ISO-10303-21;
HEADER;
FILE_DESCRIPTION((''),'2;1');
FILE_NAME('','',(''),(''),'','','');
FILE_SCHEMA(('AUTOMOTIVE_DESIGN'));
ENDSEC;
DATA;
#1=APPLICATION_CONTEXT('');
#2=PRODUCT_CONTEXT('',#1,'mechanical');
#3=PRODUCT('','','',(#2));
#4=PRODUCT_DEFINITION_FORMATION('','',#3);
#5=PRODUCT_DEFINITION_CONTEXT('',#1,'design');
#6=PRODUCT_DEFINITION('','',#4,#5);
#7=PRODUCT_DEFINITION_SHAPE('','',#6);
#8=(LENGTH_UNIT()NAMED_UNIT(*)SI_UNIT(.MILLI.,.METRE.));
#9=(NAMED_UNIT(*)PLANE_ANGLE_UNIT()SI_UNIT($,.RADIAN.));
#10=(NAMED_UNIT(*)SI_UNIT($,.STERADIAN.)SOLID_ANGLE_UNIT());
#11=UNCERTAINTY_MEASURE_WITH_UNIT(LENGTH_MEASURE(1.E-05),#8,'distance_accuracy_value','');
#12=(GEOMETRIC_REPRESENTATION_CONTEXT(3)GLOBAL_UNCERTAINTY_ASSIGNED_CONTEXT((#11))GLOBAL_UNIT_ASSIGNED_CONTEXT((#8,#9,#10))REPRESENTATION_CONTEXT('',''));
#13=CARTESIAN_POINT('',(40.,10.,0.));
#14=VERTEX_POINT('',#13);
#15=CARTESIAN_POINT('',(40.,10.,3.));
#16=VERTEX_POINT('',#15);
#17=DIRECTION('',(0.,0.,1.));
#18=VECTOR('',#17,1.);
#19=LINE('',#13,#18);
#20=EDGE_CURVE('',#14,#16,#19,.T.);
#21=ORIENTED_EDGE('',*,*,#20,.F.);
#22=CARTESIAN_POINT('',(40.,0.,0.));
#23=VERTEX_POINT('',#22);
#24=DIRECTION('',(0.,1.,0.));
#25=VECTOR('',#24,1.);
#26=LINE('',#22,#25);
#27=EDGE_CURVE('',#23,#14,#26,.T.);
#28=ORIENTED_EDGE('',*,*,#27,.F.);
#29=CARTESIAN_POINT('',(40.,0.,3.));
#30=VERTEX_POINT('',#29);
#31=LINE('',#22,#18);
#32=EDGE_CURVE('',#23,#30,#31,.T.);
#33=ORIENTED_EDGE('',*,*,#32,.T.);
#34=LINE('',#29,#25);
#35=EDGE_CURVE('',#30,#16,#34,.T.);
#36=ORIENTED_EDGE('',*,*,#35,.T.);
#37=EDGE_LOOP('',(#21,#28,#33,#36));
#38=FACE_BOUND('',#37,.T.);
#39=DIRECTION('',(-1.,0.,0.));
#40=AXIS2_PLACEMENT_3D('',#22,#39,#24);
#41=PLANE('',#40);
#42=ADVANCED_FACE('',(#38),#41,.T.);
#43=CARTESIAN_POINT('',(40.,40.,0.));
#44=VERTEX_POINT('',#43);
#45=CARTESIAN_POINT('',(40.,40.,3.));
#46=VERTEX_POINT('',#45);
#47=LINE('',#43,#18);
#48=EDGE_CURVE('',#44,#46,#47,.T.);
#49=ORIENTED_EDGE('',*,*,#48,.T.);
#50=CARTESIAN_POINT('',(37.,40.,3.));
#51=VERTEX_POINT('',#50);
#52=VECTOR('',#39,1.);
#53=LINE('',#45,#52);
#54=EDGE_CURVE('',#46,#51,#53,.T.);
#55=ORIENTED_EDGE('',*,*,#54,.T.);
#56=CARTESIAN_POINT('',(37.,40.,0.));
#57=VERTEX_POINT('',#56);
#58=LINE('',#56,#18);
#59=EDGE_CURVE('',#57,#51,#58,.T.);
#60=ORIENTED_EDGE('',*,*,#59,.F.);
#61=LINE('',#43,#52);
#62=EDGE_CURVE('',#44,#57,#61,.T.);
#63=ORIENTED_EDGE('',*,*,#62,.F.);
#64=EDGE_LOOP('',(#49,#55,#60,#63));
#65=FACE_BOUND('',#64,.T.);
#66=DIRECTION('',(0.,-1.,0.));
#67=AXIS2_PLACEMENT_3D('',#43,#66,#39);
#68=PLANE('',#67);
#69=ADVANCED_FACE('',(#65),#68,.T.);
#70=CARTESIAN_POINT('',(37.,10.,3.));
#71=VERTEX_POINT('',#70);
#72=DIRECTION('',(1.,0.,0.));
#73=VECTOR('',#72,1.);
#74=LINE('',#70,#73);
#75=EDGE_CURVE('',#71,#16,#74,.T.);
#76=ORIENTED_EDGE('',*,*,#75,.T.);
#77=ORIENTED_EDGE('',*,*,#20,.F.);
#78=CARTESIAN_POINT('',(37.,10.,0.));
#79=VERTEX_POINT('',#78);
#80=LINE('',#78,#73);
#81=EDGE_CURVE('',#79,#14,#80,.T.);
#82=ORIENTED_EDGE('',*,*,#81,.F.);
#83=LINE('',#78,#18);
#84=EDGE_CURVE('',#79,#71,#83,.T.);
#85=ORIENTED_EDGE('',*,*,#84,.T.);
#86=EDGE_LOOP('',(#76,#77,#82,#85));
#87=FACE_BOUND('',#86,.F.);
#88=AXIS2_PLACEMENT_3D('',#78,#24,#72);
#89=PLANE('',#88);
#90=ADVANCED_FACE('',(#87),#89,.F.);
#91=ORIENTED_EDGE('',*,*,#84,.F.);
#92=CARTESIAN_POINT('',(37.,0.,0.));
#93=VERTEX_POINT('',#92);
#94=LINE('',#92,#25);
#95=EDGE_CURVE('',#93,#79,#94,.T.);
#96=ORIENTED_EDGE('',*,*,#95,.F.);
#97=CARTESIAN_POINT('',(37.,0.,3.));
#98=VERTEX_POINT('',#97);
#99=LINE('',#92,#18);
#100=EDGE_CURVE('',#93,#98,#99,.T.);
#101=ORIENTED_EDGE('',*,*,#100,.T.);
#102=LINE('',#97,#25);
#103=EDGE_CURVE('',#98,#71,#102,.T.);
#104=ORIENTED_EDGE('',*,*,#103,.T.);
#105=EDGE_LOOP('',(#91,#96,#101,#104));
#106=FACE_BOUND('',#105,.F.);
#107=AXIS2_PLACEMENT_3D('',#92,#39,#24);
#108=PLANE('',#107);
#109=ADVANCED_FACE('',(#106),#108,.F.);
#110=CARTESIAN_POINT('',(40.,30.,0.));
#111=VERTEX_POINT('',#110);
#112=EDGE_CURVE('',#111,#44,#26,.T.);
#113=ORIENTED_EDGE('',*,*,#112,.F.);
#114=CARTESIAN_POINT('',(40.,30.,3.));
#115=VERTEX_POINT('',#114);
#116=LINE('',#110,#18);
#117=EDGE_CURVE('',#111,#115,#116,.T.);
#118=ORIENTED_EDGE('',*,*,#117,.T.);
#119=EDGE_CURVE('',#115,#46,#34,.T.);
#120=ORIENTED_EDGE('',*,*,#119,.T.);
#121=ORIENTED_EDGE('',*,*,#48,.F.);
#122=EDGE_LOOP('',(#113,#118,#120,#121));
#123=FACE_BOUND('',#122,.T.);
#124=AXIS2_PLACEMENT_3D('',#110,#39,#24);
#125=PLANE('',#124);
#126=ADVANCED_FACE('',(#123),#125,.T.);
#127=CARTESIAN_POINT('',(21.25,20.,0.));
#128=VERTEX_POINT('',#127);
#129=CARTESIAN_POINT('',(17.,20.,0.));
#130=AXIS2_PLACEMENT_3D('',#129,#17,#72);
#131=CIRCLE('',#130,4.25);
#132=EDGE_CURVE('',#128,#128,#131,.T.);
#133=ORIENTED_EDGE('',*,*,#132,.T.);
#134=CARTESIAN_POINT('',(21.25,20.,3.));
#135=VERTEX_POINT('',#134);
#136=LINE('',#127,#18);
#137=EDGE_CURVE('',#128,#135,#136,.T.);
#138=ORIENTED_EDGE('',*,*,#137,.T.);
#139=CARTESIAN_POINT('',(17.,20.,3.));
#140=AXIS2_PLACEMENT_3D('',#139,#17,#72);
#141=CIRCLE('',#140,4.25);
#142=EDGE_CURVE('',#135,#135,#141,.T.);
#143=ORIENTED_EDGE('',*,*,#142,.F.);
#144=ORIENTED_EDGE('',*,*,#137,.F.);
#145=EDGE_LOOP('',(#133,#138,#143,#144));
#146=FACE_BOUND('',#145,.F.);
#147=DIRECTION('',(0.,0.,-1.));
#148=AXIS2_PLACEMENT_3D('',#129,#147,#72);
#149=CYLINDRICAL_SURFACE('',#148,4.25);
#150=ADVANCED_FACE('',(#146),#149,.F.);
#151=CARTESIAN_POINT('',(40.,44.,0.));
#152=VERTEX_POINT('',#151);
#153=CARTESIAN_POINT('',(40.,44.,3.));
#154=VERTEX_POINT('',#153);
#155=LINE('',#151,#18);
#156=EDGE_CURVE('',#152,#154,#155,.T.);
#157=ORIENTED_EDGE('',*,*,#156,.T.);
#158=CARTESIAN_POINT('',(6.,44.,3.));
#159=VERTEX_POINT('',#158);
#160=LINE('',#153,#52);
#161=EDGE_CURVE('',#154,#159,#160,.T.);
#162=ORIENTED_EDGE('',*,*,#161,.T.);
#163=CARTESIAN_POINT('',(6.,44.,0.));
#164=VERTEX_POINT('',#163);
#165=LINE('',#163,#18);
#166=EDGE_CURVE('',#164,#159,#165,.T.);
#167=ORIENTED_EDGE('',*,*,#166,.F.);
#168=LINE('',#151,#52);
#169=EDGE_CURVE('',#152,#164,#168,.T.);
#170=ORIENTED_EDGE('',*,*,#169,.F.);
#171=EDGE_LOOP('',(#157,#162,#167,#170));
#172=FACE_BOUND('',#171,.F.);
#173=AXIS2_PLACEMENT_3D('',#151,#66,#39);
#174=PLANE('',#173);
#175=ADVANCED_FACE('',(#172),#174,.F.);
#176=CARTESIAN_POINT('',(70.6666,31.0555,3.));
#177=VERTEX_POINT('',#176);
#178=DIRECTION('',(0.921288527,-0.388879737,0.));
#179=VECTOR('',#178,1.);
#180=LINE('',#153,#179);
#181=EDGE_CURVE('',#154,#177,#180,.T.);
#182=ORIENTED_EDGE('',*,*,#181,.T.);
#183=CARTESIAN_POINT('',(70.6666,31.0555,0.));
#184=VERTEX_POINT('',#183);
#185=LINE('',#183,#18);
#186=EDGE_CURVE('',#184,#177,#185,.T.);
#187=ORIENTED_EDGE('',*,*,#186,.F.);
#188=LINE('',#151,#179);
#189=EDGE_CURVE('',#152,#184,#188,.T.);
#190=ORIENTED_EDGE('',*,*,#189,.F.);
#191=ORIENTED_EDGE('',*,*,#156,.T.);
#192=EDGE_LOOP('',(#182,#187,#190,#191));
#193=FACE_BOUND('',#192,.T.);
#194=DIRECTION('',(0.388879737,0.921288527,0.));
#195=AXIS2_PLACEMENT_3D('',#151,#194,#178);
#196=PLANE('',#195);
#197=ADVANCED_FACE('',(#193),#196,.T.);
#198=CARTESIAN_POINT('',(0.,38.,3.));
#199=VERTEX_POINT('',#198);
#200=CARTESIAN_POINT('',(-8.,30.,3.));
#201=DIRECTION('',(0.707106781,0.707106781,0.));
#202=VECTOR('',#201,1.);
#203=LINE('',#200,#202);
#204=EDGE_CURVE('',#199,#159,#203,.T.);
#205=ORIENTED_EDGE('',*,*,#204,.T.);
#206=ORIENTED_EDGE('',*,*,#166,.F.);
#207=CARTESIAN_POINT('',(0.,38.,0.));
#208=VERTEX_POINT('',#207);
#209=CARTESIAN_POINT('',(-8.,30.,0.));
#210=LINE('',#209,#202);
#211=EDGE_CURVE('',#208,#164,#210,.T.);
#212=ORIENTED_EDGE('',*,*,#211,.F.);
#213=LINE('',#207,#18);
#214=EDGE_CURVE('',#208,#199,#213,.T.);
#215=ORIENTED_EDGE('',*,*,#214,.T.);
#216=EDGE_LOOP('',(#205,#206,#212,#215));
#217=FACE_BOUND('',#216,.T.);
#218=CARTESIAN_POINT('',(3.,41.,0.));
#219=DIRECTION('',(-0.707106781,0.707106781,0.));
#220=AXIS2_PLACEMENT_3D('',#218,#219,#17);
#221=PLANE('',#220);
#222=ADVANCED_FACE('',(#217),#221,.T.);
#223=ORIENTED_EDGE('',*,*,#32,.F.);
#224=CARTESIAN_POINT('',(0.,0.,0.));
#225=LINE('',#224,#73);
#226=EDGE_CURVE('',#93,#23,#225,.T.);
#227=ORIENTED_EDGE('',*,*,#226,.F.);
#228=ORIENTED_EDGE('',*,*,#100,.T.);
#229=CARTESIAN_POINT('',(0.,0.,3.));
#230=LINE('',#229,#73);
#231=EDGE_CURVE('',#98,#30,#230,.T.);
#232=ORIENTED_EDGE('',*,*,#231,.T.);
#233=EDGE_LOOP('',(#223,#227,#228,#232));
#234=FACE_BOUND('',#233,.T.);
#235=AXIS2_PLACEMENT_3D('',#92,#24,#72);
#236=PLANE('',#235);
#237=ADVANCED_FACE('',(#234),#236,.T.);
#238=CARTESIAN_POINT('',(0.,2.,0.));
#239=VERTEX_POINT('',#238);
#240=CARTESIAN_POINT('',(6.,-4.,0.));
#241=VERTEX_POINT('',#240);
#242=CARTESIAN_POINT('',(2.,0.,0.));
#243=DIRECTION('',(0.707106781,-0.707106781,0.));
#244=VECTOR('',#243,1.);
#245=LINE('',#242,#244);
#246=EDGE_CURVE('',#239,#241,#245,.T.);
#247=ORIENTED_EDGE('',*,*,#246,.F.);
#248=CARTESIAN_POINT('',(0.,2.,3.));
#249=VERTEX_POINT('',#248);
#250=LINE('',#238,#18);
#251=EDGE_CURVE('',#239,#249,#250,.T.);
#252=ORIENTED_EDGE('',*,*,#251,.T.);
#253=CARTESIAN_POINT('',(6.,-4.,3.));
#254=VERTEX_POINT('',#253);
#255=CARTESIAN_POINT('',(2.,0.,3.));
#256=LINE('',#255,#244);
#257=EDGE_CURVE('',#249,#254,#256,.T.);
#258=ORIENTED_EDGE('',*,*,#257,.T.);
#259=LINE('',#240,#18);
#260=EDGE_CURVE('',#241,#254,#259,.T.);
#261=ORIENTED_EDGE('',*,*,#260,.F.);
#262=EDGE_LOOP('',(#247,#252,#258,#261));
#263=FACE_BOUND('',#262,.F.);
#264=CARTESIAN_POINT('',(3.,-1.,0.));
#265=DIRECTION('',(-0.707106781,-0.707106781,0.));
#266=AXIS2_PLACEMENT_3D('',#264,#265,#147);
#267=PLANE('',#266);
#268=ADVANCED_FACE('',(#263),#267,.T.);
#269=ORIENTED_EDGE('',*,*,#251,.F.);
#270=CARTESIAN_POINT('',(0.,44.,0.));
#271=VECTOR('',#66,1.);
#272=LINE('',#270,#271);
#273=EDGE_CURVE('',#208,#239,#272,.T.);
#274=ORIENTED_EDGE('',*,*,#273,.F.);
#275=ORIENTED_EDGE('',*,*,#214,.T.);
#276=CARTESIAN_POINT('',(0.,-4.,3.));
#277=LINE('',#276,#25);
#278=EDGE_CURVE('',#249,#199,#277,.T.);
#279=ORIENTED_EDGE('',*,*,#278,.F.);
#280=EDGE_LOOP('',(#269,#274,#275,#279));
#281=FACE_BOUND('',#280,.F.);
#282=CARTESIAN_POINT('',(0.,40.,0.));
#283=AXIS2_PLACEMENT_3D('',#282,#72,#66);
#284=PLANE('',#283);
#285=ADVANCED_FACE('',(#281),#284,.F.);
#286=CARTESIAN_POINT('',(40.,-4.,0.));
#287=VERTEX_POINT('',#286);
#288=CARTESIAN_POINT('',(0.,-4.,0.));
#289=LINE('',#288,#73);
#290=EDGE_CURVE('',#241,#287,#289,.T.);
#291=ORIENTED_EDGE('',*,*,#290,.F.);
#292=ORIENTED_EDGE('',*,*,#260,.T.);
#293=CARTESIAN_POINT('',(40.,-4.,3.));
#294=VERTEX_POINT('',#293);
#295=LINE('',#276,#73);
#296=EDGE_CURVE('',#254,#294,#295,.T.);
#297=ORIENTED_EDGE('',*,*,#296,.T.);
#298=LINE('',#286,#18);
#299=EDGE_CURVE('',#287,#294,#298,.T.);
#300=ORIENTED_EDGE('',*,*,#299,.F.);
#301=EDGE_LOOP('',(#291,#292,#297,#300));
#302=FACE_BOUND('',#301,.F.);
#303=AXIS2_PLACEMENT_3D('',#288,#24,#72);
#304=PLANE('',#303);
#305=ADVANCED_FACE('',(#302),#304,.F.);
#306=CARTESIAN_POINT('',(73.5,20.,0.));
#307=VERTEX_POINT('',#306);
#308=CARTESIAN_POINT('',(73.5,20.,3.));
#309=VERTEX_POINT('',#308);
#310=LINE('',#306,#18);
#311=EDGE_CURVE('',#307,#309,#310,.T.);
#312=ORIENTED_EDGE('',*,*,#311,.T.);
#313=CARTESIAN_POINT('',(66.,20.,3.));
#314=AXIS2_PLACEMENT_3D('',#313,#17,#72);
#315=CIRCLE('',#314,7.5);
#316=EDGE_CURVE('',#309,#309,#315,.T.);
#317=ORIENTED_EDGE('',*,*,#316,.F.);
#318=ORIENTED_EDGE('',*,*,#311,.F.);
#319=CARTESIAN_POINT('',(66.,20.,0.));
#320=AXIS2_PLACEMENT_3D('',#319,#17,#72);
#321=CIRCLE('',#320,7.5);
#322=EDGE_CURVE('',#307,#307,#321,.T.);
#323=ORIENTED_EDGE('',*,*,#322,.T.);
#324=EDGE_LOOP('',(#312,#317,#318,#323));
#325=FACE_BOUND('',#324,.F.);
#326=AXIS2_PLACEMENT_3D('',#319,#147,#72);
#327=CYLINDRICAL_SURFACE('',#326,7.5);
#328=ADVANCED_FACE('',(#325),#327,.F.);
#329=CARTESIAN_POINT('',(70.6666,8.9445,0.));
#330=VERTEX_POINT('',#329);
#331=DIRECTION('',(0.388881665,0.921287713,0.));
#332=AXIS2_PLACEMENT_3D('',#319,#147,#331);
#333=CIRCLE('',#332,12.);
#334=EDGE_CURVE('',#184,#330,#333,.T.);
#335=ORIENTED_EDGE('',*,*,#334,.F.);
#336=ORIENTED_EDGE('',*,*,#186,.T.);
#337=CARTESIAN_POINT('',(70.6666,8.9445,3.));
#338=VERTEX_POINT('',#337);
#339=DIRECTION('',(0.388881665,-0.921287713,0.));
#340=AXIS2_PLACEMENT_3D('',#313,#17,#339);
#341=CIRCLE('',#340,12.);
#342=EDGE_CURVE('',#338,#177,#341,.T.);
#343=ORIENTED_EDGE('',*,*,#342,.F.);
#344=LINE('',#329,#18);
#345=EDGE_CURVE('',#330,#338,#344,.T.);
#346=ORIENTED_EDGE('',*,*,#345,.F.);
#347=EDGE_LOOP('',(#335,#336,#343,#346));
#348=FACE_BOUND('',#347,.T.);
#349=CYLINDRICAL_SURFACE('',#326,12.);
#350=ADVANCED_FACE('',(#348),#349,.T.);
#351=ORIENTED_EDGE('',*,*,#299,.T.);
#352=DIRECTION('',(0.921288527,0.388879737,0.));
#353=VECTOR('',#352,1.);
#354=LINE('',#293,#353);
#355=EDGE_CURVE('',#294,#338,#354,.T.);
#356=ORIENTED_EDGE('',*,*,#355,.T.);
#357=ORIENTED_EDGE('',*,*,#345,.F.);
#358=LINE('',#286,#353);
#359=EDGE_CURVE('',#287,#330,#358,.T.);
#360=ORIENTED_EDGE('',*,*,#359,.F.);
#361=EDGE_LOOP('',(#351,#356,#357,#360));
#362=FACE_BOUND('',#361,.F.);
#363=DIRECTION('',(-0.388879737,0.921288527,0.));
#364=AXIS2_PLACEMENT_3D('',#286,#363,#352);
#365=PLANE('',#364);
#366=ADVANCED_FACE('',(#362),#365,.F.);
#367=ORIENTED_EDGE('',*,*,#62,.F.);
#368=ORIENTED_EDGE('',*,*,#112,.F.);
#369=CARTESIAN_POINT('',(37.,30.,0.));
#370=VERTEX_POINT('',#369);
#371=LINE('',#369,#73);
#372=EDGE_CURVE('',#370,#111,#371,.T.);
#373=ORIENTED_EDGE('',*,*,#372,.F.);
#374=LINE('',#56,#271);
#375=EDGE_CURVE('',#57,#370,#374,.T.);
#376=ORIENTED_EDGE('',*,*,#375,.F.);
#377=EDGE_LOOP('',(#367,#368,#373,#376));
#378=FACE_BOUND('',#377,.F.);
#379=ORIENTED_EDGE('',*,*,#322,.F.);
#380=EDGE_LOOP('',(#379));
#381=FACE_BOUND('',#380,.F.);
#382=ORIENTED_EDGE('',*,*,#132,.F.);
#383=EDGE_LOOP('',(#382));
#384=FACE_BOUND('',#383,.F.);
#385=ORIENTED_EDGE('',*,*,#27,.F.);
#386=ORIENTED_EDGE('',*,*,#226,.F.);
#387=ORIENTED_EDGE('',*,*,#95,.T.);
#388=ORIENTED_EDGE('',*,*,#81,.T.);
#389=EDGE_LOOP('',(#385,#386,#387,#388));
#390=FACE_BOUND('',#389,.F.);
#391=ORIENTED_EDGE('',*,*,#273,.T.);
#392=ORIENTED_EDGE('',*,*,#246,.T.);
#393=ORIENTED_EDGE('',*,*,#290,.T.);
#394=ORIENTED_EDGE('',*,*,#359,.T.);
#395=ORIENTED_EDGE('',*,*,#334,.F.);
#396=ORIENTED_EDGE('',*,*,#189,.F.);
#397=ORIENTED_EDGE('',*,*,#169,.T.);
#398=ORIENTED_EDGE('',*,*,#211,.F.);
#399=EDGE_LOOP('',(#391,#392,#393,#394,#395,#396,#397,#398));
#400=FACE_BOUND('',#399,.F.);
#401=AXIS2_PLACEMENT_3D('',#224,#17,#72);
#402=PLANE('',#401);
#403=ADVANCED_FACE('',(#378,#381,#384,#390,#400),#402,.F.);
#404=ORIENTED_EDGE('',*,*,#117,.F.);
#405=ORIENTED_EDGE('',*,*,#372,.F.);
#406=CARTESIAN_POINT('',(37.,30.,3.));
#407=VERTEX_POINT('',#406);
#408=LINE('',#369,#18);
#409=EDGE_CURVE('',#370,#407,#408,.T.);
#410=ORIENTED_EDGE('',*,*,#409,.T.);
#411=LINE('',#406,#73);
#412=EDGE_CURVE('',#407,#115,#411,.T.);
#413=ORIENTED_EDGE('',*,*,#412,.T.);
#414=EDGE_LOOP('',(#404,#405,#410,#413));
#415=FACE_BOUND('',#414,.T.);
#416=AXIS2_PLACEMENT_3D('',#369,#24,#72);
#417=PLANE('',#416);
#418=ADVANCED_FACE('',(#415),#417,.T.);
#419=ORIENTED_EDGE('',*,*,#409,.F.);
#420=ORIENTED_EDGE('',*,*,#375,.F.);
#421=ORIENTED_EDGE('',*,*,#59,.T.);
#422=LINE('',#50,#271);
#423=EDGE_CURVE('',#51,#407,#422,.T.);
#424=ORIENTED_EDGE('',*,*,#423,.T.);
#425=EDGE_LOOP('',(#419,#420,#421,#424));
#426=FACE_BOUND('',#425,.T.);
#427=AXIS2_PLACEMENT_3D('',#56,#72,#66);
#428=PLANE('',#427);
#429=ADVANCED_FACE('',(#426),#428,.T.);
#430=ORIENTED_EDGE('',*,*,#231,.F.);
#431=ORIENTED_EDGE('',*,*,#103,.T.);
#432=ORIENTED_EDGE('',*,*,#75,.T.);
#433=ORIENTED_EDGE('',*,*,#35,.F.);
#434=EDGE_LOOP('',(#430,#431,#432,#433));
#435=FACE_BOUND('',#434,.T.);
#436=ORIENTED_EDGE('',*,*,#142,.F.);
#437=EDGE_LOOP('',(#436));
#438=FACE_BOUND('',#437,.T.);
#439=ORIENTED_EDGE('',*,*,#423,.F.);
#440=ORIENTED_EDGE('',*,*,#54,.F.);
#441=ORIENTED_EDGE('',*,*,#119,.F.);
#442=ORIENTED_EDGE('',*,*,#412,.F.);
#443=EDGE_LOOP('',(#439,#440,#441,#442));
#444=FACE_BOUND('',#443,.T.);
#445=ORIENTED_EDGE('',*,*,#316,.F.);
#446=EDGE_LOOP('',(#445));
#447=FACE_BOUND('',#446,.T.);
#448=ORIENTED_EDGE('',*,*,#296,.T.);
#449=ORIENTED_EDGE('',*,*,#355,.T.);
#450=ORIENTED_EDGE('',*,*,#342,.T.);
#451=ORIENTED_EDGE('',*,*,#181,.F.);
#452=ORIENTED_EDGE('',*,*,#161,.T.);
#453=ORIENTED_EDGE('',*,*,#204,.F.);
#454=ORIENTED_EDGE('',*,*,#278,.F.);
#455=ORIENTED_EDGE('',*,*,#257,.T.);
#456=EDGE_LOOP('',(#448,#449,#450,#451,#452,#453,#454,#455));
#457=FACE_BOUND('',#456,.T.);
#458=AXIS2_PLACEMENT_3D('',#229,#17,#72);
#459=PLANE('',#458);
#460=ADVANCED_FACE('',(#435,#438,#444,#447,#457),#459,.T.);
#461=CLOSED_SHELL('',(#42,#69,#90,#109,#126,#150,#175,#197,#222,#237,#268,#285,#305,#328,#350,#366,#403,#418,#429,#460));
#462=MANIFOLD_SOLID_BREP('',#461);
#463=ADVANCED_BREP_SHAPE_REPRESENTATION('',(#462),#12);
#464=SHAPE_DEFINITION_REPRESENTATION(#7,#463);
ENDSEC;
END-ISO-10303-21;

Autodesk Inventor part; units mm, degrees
ref_plane "YZ Plane" through (0, 0, 0) normal (1, 0, 0) x (0, 1, 0)
ref_plane "XZ Plane" through (0, 0, 0) normal (0, 1, 0) x (-1, 0, 0)
ref_plane "XY Plane" through (0, 0, 0) normal (0, 0, 1) x (1, 0, 0)
sketch "Sketch1" plane through (0, 0, 0) normal (0, 0, 1) x (1, 0, 0)
  line L0 (0, 0) -> (40, 0)
  line L1 (40, 0) -> (40, 40)
  line L2 (40, 40) -> (0, 40)
  line L3 (0, 40) -> (0, 0)
  line L4 (40, 0) -> (37, 0)
  line L5 (37, 0) -> (37, 10)
  line L6 (37, 10) -> (40, 10)
  line L7 (40, 10) -> (40, 0)
  line L8 (40, 40) -> (37, 40)
  line L9 (37, 40) -> (37, 30)
  line L10 (37, 30) -> (40, 30)
  line L11 (40, 30) -> (40, 40)
  line L12 (0, -4) -> (40, -4)
  line L13 (40, -4) -> (40, 44)
  line L14 (40, 44) -> (0, 44)
  line L15 (0, 44) -> (0, -4)
  circle A0 centre (66, 20) radius 7.5
  circle A1 centre (66, 20) radius 12
  line L16 (40, -4) -> (70.6666, 8.9445)
  line L17 (40, 20) -> (43.7791, 20)
  line L18 (40, 44) -> (70.6666, 31.0555)
  circle A2 centre (17, 20) radius 4.25
  line L19 (37, 30) -> (37, 10)
  point P0 (20, 40)
  dimension "d0" = 40
  dimension "d1" = 40
  dimension "d2" = 3
  dimension "d3" = 10
  dimension "d4" = 10
  dimension "d5" = 4
  dimension "d6" = 4
  dimension "d7" = 15
  dimension "d8" = 24
  dimension "d9" = 26
  dimension "d11" = 8.5
  dimension "d17" = 20
  dimension "d18" = 20
extrude "Plate1" add sketch "Sketch1" along normal blind 3 contours L3 L2 L9 L19 L5 L0 | L0 L13 L12 L15 | L15 L14 L13 L2 | L1 L13 L18 A1 L16 | L19 L10 L1 L6 | A1
chamfer "Corner Chamfer1" distance 6 angle 45 2 edges at (0, 44, 1.5) (0, -4, 1.5)
equation "\"d6\" = d5"
equation "\"d10\" = Thickness"
equation "\"BendRadius\" = Thickness"
equation "\"BendReliefWidth\" = Thickness"
equation "\"BendReliefDepth\" = 0.5 * Thickness"
equation "\"CornerReliefSize\" = 4 * Thickness"
equation "\"MinimumRemnant\" = 2 * Thickness"
equation "\"TransitionRadius\" = BendRadius"
equation "\"JacobiRadiusSize\" = BendRadius"
equation "\"GapSize\" = Thickness"
equation "\"Thickness\" = 3"
properties part number "A_beam_piston_mount_2" material "Stainless Steel"
